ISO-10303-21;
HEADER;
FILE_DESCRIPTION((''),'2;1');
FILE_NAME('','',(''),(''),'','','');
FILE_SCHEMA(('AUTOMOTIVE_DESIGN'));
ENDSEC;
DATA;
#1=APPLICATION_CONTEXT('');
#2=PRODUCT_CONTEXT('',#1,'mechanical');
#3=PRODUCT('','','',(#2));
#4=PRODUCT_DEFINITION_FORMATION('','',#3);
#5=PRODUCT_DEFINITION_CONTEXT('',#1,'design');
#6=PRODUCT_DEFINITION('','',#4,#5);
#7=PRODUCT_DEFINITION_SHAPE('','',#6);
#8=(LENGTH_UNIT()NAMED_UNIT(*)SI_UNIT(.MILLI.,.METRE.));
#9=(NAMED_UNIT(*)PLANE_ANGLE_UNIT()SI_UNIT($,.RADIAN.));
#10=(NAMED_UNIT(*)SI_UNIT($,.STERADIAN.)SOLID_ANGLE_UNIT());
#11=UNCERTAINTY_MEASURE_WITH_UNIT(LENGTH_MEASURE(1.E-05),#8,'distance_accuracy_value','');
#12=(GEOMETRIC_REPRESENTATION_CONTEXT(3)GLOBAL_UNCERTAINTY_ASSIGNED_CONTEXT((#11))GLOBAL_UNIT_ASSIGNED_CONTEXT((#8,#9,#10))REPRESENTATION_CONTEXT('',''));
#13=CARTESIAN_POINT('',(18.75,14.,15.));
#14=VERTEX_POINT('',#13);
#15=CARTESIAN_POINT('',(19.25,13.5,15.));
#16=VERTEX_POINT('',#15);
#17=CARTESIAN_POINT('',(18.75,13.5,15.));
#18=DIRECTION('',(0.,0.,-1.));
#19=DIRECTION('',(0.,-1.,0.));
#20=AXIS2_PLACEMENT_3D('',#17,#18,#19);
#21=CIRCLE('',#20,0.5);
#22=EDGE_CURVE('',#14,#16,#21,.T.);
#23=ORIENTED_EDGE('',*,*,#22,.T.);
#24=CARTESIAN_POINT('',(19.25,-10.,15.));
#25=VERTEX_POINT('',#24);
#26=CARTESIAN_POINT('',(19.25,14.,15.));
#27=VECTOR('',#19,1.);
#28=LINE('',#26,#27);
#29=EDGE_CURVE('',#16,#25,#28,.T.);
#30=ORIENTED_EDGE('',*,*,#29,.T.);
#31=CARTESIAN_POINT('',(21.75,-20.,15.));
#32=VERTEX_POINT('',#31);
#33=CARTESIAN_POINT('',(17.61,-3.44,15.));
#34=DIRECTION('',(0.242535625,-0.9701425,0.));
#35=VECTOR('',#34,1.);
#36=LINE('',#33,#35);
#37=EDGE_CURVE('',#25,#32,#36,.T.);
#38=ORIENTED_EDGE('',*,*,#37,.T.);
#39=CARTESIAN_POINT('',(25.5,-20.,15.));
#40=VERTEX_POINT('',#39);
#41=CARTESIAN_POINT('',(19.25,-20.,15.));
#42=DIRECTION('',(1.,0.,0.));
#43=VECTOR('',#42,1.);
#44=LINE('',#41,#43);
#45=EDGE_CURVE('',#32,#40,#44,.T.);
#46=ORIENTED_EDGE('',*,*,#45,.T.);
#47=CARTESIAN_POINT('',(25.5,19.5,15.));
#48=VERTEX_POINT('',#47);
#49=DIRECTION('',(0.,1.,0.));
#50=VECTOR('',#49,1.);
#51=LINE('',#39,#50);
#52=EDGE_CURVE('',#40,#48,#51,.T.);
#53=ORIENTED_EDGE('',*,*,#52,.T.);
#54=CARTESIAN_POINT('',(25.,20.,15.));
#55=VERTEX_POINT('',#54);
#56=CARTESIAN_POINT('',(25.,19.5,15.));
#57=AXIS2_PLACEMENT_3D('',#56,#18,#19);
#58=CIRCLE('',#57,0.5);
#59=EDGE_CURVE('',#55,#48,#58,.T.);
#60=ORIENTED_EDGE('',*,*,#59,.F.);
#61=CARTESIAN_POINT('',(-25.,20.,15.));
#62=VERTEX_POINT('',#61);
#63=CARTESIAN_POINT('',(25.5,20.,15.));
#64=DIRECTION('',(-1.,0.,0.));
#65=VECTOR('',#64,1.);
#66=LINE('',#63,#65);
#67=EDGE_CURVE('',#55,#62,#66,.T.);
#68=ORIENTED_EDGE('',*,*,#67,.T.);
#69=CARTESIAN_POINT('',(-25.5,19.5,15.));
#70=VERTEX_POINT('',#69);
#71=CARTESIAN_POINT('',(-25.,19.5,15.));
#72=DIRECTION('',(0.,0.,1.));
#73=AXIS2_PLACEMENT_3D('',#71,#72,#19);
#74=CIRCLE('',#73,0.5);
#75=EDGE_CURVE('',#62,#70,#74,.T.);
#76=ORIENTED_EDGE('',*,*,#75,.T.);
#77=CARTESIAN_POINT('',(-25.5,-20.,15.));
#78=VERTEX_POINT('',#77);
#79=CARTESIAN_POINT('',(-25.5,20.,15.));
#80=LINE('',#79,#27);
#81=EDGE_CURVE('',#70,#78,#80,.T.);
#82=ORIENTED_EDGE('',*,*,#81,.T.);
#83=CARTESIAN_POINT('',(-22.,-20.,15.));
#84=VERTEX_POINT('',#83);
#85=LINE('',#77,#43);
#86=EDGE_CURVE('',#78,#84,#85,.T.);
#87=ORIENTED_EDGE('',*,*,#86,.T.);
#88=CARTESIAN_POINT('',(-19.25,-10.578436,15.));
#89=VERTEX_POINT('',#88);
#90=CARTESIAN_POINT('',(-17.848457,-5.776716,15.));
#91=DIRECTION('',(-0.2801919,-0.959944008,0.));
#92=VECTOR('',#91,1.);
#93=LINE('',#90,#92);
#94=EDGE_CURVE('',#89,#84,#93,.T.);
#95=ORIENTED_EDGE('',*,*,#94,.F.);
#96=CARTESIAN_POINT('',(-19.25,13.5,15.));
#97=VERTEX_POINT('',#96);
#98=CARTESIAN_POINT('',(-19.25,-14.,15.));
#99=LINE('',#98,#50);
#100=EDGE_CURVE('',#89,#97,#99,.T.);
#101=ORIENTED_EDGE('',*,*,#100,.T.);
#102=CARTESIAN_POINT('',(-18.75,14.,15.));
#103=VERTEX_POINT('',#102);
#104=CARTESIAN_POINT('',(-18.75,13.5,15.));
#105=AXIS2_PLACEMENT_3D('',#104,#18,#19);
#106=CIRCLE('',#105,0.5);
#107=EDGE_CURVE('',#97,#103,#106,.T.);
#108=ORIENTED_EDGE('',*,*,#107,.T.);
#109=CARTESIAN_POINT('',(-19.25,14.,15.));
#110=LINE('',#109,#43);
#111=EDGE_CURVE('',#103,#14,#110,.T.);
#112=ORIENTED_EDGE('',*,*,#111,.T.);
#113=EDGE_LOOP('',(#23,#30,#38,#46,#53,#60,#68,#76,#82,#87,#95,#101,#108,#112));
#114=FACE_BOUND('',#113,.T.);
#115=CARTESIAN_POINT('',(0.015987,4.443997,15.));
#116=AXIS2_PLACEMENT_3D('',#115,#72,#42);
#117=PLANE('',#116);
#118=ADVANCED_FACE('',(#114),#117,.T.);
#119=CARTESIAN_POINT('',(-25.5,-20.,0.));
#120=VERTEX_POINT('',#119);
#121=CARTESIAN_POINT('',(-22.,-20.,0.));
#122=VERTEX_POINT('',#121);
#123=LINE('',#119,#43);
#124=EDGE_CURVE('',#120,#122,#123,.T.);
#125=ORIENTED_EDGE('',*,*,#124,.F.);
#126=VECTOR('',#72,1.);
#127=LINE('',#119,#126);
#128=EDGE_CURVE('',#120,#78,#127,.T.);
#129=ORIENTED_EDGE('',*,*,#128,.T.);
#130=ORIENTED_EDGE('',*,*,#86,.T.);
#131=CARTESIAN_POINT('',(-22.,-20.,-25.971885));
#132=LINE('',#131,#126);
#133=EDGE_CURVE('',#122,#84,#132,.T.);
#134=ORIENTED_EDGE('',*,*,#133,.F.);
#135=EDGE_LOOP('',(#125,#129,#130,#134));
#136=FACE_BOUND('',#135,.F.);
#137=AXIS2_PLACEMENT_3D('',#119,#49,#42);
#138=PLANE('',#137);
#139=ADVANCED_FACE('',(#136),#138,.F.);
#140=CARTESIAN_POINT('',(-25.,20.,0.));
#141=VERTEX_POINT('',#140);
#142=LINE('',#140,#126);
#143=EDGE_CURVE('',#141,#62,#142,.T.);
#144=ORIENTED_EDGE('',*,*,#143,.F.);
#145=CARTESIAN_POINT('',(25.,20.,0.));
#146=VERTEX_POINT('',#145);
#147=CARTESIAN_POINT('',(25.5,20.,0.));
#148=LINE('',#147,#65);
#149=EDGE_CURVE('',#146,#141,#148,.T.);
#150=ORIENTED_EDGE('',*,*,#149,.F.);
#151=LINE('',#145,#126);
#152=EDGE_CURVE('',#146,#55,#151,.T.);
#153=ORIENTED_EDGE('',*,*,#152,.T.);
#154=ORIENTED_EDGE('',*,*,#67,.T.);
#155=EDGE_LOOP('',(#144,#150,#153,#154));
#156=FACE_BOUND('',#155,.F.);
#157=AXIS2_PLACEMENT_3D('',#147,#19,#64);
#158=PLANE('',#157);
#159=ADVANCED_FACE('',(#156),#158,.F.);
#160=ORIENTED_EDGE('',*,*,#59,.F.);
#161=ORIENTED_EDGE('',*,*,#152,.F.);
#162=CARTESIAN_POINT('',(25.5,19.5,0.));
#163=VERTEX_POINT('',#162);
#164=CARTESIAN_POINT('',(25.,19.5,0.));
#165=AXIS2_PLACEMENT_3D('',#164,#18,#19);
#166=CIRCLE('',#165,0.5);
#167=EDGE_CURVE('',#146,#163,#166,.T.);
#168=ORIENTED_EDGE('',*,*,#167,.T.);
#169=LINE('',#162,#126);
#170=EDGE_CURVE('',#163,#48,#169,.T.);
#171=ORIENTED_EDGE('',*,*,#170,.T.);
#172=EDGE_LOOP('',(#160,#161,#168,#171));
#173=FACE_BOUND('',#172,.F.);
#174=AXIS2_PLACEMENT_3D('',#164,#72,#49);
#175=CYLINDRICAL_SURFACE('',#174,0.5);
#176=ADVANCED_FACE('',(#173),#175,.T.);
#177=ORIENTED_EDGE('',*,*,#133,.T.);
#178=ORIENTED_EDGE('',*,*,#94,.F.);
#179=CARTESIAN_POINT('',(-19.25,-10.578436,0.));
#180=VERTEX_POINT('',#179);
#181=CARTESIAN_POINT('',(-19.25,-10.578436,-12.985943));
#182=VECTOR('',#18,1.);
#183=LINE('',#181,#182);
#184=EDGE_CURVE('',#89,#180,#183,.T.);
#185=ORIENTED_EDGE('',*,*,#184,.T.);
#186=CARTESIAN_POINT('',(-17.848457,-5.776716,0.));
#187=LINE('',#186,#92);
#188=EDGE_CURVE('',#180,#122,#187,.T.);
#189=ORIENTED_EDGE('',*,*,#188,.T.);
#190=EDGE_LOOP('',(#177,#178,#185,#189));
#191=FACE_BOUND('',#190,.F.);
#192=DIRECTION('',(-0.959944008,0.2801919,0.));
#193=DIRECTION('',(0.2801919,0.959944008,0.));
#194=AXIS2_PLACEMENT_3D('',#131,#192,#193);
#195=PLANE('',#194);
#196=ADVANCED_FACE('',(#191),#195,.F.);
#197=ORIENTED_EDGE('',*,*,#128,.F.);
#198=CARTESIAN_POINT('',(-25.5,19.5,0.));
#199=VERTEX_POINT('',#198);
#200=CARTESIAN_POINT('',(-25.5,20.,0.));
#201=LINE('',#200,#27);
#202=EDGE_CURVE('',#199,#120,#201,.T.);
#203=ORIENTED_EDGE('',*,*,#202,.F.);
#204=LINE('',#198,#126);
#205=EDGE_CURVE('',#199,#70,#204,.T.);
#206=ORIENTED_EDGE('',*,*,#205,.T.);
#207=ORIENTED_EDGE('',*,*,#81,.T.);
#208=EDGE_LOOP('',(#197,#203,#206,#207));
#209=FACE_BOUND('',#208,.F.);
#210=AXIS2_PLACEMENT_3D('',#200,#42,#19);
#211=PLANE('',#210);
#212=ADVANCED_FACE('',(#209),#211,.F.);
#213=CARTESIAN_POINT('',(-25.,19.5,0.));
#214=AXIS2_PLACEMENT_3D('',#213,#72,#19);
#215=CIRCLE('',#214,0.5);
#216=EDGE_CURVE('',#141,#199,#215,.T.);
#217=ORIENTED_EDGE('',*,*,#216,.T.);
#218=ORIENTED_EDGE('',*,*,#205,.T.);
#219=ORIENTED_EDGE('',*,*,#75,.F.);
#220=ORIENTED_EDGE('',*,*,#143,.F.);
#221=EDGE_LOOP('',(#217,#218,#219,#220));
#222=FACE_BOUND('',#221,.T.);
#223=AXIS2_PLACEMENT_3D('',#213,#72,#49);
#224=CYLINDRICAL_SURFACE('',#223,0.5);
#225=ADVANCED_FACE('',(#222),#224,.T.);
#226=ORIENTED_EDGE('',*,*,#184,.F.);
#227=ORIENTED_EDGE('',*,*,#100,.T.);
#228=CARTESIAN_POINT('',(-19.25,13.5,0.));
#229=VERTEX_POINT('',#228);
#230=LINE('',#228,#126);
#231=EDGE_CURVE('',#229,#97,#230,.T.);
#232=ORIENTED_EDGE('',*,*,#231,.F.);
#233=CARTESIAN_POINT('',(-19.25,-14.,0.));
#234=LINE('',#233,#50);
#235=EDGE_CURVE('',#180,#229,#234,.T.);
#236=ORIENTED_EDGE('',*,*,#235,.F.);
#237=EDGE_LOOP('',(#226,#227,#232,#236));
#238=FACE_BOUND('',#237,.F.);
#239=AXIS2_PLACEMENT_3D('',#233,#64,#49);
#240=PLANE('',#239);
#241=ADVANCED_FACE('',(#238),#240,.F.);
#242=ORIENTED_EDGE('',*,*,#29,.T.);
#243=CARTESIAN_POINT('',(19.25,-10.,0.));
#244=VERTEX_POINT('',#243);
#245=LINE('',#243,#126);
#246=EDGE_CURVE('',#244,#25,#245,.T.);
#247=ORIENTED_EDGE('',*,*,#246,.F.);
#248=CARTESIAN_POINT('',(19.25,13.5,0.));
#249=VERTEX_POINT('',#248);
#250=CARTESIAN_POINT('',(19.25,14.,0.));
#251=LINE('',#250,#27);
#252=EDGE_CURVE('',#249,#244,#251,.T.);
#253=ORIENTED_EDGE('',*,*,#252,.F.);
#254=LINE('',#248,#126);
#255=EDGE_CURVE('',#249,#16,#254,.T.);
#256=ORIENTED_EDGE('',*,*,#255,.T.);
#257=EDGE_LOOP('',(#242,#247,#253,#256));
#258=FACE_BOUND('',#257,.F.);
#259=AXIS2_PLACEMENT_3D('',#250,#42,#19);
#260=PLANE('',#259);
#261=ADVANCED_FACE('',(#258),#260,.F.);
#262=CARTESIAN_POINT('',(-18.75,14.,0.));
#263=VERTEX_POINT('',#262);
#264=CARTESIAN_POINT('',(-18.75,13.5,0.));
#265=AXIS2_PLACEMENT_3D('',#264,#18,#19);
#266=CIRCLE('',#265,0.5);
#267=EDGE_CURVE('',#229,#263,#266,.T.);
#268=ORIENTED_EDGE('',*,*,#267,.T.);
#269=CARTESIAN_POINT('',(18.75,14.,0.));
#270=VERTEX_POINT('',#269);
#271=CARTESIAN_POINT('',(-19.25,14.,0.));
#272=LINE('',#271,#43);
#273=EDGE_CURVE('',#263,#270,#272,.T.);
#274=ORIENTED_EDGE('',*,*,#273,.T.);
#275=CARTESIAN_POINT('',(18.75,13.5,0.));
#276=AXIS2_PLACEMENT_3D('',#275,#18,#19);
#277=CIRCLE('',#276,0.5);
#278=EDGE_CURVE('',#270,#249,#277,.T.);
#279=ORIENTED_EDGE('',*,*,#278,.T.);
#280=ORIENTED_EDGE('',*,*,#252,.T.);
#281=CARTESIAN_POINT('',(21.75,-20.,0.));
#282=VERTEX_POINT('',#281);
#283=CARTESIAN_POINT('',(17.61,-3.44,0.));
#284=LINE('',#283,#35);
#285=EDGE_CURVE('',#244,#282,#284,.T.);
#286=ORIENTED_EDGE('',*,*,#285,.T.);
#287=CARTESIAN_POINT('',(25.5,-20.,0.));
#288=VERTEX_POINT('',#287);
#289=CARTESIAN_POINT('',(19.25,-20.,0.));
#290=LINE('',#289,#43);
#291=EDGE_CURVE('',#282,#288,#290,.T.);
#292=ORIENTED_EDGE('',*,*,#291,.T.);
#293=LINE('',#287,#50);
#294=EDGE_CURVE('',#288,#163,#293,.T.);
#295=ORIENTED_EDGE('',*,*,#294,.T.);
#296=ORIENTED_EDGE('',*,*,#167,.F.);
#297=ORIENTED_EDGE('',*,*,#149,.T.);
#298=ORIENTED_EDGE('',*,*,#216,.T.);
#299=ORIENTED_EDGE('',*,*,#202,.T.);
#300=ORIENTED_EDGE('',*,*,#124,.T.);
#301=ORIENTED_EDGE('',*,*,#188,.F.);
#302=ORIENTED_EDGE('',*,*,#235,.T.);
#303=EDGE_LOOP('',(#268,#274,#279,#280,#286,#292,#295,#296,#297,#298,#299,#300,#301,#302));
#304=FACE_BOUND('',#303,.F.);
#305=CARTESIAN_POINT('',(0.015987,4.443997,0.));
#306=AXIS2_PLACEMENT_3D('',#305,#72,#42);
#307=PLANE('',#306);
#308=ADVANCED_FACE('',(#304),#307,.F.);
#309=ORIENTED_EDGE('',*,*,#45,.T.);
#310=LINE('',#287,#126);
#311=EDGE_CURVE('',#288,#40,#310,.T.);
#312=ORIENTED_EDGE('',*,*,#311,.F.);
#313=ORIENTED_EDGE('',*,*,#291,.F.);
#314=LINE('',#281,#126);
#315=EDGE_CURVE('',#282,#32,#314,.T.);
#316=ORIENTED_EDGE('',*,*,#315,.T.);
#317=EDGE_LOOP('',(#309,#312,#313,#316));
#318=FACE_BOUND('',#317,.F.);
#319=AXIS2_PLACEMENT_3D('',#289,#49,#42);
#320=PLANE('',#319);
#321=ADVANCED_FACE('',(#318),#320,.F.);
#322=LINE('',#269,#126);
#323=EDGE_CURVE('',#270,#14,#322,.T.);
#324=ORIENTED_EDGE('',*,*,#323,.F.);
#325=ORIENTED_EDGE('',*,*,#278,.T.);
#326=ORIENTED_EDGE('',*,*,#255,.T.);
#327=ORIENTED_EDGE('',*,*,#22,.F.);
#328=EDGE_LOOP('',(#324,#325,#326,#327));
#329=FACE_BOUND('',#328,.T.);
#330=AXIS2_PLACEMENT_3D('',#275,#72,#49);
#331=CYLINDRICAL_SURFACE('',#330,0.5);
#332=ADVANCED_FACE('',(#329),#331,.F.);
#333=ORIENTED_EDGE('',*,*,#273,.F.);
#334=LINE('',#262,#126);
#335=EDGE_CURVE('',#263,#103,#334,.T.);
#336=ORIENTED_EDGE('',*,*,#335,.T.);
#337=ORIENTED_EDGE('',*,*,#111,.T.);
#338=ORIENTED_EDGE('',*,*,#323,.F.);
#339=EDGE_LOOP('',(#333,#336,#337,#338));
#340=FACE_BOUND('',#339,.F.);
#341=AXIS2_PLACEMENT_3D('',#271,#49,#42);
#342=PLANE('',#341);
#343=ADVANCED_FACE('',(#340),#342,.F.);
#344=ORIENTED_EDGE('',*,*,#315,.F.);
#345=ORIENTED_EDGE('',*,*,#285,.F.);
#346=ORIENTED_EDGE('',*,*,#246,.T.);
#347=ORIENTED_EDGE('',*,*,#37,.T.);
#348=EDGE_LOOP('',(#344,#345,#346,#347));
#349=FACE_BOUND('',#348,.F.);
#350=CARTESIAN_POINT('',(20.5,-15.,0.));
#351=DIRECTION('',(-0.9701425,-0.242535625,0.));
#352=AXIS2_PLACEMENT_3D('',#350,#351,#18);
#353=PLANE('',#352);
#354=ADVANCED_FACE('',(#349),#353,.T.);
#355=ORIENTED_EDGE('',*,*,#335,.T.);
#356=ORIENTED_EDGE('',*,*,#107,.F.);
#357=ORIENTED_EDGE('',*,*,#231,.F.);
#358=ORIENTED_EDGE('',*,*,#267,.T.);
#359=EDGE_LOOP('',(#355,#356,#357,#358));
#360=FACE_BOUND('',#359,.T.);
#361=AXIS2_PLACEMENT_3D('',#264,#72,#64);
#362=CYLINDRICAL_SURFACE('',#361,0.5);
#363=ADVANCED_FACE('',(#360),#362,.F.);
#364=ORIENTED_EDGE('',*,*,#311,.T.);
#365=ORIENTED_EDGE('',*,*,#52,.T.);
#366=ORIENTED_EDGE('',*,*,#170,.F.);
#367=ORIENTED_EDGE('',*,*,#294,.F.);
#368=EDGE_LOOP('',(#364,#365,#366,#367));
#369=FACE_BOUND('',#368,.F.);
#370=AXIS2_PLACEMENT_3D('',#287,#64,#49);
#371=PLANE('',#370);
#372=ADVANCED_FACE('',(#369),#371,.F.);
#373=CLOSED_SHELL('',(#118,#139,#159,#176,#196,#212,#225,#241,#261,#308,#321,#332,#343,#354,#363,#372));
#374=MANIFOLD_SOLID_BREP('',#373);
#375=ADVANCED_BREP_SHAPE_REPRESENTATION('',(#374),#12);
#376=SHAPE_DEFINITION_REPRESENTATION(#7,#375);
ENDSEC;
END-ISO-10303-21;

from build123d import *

# Parameters (mm, degrees)
F1_DEPTH    = 15
F2_R        = 0.5
F3_T1_DEPTH = 66.9437702684
F4_SIZE2    = 2.5
F4_SIZE     = 10


# Not quite as in the source:
# - a fillet or chamfer that OpenCascade refuses, or shapes differently, is made with other operations: its cross-section is extruded or revolved along the edge and cut away or added


with BuildPart() as f1:
    # F0 (on Top) → F1 (new body)
    with BuildSketch(Plane.XY):
        Polygon((25.5, 20), (-25.5, 20), (-25.5, -20), (-19.5, -20), (-19.25, -14), (-19.25, 14), (19.25, 14), (19.25, -14), (19.25, -20), (25.5, -20), align=None)
    extrude(amount=F1_DEPTH)

    # F2
    f2_edges = [f1.edges().sort_by_distance(p)[0] for p in [
        (-19.25, 14, 7.5),
        (19.25, 14, 7.5),
        (-25.5, 20, 7.5),
        (25.5, 20, 7.5),
    ]]
    fillet(f2_edges, radius=F2_R)

    # F3: chamfer of 10 x 2.5 on 1 edges, made by hand

    # F3_s2 → F3_t1 (cut)
    with BuildSketch(Plane.XY.offset(-25.9718851342)):
        Polygon((-22, -20), (-19.0836945529, -10.0086692691), (-19.5, -20), align=None)
    extrude(amount=F3_T1_DEPTH, mode=Mode.SUBTRACT)

    # F4
    f4_edges = [f1.edges().sort_by_distance(p)[0] for p in [
        (19.25, -20, 7.5),
    ]]
    f4_side = f1.faces().sort_by_distance((19.25, -3.25, 7.5))[0]
    chamfer(f4_edges, length=F4_SIZE, length2=F4_SIZE2, reference=f4_side)


solid = f1.part
